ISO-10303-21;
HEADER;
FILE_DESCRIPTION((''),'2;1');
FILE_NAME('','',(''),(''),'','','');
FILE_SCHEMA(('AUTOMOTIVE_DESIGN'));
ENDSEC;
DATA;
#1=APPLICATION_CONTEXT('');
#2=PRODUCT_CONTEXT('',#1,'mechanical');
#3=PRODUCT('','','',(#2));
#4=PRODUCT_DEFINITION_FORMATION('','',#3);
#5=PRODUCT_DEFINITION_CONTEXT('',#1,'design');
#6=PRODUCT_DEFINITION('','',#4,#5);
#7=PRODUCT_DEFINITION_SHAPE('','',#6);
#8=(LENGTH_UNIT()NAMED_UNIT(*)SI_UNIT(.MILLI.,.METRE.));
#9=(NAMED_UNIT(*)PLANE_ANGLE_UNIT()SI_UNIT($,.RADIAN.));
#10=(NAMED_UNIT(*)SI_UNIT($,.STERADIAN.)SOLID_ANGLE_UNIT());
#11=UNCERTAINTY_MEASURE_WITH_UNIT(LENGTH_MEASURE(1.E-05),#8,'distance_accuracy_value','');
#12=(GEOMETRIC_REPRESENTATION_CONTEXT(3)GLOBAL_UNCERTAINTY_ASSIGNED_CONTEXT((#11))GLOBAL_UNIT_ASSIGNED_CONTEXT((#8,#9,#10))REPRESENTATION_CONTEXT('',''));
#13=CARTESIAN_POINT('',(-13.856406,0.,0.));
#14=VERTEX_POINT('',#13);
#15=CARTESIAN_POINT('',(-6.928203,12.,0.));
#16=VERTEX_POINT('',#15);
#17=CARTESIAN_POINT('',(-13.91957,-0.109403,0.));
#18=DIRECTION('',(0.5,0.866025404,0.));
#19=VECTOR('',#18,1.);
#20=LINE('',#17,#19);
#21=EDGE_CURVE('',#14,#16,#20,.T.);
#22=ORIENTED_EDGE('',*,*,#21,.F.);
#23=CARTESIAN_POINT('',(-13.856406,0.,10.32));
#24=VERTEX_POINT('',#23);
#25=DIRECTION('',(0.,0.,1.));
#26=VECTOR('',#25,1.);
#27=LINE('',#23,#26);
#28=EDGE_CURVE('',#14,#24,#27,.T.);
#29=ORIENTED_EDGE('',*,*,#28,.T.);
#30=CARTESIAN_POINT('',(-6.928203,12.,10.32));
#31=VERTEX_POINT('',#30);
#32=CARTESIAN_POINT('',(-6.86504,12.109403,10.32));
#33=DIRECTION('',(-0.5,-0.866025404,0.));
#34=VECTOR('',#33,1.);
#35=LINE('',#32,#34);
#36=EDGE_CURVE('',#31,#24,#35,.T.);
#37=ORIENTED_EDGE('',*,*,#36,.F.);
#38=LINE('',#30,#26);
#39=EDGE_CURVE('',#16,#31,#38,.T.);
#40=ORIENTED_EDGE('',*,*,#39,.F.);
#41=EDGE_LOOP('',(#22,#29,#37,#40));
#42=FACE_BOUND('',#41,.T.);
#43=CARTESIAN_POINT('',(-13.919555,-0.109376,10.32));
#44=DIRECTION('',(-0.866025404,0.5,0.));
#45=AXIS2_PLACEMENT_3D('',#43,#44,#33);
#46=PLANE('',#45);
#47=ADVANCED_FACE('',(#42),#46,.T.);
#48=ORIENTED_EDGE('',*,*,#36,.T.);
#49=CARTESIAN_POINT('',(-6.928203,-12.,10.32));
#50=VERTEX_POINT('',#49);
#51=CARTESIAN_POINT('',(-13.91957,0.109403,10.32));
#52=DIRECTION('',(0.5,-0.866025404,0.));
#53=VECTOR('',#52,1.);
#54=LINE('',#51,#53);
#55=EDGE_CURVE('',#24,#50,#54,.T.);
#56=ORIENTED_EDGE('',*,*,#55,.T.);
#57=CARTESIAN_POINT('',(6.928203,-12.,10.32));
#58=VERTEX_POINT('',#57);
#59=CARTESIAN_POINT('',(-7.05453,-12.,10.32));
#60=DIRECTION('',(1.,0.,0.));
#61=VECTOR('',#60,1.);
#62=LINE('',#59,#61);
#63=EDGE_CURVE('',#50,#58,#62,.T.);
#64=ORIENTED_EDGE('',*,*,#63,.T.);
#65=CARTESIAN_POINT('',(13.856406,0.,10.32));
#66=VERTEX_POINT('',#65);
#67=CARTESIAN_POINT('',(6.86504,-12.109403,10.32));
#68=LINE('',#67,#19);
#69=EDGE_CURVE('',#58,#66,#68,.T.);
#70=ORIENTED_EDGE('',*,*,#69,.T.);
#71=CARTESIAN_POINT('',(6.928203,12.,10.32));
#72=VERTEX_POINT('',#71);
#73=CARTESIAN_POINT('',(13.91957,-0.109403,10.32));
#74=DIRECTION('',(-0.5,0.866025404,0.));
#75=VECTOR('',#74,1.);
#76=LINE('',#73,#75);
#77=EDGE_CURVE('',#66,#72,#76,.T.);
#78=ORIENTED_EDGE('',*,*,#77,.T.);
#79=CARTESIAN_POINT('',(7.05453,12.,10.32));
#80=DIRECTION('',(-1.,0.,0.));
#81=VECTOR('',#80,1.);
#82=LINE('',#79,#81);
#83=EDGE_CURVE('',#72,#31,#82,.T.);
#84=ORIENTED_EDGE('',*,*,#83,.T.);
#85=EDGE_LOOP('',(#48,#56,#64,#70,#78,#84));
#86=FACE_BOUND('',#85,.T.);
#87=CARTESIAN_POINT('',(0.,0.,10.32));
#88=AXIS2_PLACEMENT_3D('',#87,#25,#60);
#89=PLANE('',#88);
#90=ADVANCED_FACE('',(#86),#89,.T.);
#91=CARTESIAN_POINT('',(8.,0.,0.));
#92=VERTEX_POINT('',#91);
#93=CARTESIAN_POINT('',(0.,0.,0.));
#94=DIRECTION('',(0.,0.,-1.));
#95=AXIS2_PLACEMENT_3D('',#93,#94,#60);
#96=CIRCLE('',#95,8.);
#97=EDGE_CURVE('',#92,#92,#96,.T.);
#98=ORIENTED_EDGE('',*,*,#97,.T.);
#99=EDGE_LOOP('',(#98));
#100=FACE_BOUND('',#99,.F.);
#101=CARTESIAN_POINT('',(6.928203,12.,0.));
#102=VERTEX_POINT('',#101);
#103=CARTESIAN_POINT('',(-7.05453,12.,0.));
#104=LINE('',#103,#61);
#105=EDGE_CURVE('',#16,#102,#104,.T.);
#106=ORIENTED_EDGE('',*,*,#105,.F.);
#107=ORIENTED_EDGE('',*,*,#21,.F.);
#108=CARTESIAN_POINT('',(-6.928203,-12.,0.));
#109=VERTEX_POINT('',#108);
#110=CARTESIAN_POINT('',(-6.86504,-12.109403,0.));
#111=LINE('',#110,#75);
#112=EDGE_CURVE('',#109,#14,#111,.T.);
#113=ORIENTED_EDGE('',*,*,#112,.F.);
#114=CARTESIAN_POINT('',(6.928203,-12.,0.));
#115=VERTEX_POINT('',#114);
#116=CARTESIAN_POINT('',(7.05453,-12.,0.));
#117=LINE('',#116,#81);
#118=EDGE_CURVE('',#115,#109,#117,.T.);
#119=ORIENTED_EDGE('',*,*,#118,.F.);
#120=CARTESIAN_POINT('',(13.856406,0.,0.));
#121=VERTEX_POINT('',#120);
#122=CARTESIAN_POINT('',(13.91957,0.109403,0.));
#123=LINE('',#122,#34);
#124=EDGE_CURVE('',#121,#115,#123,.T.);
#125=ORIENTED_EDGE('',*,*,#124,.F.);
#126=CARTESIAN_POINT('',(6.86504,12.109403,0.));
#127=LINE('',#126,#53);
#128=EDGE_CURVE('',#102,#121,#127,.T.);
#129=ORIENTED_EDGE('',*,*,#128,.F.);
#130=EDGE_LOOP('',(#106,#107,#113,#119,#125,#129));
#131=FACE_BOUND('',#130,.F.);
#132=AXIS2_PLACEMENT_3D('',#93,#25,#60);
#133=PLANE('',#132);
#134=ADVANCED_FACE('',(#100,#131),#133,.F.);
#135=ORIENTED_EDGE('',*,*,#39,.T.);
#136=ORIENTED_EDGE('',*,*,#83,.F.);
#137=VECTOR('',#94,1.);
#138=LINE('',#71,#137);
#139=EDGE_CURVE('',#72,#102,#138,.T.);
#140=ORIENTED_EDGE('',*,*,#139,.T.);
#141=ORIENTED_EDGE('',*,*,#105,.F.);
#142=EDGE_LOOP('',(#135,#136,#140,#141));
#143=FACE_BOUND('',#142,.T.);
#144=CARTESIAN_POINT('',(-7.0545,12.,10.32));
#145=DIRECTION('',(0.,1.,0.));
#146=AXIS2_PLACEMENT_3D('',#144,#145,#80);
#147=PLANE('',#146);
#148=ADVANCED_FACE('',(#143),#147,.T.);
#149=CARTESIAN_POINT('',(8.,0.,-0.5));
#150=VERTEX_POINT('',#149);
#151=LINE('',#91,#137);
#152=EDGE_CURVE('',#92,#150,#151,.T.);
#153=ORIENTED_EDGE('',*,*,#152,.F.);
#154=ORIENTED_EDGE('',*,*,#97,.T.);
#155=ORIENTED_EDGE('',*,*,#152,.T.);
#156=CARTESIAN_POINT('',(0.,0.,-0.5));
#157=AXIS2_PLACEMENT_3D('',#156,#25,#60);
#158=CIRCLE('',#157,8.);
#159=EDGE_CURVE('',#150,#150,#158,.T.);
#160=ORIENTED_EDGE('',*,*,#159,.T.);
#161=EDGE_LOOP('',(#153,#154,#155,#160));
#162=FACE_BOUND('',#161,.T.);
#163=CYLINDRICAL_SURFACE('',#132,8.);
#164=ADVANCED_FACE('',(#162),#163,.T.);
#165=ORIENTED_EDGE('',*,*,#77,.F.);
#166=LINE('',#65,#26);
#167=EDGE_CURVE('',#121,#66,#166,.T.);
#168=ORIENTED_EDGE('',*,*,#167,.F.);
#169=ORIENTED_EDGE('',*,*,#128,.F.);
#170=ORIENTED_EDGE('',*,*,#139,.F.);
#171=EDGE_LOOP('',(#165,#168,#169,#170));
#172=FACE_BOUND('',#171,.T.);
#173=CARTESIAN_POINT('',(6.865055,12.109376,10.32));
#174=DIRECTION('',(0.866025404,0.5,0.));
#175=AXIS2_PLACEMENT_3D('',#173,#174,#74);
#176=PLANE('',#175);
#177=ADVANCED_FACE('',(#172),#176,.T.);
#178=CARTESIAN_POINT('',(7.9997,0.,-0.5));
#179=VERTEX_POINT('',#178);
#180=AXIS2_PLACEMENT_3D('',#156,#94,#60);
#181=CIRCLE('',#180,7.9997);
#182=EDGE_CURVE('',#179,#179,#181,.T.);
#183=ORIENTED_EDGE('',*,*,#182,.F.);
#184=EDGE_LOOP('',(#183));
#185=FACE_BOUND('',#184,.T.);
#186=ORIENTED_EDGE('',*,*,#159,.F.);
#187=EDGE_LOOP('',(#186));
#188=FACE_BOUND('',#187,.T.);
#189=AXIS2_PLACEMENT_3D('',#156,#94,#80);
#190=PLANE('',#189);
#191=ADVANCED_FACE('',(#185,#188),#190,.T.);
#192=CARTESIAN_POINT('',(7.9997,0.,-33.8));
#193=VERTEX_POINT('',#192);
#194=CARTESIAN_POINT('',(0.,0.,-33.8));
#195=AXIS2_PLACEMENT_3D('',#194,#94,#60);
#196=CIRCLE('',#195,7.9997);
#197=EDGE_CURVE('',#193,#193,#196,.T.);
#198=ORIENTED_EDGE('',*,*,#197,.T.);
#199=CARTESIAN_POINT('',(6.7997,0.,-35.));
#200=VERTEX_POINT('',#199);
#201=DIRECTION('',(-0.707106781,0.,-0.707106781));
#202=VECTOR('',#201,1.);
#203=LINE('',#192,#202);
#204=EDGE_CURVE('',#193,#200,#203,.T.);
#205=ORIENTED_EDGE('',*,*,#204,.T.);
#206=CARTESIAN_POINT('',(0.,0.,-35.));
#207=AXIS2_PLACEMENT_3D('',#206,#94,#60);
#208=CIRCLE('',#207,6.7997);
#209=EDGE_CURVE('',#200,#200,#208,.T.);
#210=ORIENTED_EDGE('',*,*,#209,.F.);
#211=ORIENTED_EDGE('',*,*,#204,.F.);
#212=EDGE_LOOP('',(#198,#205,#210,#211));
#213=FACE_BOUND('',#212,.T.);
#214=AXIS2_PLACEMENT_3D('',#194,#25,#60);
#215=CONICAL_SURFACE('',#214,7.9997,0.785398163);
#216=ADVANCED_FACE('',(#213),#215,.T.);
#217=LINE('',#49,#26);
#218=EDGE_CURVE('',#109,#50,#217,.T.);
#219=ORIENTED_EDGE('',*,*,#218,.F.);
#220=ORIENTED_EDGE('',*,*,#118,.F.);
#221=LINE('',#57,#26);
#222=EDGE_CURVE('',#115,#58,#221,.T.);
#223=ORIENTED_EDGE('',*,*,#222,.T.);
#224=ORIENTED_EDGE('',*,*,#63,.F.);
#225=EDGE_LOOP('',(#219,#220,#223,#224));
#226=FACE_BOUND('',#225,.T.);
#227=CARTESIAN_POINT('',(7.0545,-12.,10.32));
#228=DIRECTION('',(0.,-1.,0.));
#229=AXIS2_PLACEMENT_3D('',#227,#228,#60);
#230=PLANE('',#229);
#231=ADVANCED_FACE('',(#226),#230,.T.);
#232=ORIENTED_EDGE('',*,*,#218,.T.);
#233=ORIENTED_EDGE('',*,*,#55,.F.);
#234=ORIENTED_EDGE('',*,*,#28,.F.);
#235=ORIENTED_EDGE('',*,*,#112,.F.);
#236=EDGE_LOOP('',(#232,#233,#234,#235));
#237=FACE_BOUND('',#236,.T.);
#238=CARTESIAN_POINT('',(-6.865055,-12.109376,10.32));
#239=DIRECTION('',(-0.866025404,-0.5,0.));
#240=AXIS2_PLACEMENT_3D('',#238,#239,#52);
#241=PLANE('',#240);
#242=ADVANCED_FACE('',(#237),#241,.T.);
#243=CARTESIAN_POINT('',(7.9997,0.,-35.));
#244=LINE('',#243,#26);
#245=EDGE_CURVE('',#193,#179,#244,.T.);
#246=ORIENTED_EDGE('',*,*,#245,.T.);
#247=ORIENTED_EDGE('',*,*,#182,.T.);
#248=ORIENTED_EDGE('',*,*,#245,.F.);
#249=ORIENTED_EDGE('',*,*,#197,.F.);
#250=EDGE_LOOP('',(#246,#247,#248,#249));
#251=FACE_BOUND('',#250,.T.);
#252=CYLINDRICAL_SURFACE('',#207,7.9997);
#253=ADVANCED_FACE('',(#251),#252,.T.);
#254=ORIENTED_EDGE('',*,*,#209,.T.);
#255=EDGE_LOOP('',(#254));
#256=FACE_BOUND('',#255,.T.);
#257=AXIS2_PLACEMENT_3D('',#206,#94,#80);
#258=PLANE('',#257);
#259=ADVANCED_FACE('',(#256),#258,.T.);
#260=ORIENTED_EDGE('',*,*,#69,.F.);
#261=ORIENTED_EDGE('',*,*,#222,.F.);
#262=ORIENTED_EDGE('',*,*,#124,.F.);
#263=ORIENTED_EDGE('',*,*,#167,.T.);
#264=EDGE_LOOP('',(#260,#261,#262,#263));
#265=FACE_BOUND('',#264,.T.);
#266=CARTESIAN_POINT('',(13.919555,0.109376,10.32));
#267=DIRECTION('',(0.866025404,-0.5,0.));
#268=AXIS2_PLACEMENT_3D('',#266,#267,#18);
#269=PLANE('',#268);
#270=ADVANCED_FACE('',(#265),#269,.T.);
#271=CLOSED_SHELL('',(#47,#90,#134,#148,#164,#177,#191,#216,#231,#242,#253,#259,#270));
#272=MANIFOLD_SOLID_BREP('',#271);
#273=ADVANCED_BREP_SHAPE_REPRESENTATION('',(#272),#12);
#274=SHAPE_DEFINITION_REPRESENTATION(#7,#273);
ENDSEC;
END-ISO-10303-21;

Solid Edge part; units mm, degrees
sketch "Sketch1" plane through (0, 0, 0) normal (0, 0, 1) x (1, 0, 0)
  circle A0 centre (0, 0) radius 13.92
  dimension "D1" = 27.84
extrude "Protrusion1" add sketch "Sketch1" along normal blind 10.32
sketch "Sketch2" plane through (0, 0, 0) normal (0, 0, -1) x (1, 0, 0)
  circle A0 centre (0, 0) radius 8
extrude "Protrusion2" add sketch "Sketch2" along normal blind 35
sketch "Sketch3" plane through (0, 0, -35) normal (0, 0, -1) x (1, 0, 0)
  circle A0 centre (0, 0) radius 7.9997
extrude "Cutout1" cut sketch "Sketch3" against normal blind 34.5 flip side to cut
chamfer "Chamfer_1" distance 1.2 angle 45 1 edges at (-7.9997, 0, -35)
sketch "Sketch4" plane through (0, 0, 10.32) normal (0, 0, 1) x (1, 0, 0)
  line L0 (-7.0545, 12) -> (7.0545, 12)
  dimension "D1" = 24
extrude "Cutout2" cut sketch "Sketch4" against normal up to next material side at (0, 12.05, 10.32)
pattern_circular "Pattern1" count 6 over 360 about axis through (0, 0, 10.32) along (0, 0, 1) of "Cutout2"
properties part number "24106072"
